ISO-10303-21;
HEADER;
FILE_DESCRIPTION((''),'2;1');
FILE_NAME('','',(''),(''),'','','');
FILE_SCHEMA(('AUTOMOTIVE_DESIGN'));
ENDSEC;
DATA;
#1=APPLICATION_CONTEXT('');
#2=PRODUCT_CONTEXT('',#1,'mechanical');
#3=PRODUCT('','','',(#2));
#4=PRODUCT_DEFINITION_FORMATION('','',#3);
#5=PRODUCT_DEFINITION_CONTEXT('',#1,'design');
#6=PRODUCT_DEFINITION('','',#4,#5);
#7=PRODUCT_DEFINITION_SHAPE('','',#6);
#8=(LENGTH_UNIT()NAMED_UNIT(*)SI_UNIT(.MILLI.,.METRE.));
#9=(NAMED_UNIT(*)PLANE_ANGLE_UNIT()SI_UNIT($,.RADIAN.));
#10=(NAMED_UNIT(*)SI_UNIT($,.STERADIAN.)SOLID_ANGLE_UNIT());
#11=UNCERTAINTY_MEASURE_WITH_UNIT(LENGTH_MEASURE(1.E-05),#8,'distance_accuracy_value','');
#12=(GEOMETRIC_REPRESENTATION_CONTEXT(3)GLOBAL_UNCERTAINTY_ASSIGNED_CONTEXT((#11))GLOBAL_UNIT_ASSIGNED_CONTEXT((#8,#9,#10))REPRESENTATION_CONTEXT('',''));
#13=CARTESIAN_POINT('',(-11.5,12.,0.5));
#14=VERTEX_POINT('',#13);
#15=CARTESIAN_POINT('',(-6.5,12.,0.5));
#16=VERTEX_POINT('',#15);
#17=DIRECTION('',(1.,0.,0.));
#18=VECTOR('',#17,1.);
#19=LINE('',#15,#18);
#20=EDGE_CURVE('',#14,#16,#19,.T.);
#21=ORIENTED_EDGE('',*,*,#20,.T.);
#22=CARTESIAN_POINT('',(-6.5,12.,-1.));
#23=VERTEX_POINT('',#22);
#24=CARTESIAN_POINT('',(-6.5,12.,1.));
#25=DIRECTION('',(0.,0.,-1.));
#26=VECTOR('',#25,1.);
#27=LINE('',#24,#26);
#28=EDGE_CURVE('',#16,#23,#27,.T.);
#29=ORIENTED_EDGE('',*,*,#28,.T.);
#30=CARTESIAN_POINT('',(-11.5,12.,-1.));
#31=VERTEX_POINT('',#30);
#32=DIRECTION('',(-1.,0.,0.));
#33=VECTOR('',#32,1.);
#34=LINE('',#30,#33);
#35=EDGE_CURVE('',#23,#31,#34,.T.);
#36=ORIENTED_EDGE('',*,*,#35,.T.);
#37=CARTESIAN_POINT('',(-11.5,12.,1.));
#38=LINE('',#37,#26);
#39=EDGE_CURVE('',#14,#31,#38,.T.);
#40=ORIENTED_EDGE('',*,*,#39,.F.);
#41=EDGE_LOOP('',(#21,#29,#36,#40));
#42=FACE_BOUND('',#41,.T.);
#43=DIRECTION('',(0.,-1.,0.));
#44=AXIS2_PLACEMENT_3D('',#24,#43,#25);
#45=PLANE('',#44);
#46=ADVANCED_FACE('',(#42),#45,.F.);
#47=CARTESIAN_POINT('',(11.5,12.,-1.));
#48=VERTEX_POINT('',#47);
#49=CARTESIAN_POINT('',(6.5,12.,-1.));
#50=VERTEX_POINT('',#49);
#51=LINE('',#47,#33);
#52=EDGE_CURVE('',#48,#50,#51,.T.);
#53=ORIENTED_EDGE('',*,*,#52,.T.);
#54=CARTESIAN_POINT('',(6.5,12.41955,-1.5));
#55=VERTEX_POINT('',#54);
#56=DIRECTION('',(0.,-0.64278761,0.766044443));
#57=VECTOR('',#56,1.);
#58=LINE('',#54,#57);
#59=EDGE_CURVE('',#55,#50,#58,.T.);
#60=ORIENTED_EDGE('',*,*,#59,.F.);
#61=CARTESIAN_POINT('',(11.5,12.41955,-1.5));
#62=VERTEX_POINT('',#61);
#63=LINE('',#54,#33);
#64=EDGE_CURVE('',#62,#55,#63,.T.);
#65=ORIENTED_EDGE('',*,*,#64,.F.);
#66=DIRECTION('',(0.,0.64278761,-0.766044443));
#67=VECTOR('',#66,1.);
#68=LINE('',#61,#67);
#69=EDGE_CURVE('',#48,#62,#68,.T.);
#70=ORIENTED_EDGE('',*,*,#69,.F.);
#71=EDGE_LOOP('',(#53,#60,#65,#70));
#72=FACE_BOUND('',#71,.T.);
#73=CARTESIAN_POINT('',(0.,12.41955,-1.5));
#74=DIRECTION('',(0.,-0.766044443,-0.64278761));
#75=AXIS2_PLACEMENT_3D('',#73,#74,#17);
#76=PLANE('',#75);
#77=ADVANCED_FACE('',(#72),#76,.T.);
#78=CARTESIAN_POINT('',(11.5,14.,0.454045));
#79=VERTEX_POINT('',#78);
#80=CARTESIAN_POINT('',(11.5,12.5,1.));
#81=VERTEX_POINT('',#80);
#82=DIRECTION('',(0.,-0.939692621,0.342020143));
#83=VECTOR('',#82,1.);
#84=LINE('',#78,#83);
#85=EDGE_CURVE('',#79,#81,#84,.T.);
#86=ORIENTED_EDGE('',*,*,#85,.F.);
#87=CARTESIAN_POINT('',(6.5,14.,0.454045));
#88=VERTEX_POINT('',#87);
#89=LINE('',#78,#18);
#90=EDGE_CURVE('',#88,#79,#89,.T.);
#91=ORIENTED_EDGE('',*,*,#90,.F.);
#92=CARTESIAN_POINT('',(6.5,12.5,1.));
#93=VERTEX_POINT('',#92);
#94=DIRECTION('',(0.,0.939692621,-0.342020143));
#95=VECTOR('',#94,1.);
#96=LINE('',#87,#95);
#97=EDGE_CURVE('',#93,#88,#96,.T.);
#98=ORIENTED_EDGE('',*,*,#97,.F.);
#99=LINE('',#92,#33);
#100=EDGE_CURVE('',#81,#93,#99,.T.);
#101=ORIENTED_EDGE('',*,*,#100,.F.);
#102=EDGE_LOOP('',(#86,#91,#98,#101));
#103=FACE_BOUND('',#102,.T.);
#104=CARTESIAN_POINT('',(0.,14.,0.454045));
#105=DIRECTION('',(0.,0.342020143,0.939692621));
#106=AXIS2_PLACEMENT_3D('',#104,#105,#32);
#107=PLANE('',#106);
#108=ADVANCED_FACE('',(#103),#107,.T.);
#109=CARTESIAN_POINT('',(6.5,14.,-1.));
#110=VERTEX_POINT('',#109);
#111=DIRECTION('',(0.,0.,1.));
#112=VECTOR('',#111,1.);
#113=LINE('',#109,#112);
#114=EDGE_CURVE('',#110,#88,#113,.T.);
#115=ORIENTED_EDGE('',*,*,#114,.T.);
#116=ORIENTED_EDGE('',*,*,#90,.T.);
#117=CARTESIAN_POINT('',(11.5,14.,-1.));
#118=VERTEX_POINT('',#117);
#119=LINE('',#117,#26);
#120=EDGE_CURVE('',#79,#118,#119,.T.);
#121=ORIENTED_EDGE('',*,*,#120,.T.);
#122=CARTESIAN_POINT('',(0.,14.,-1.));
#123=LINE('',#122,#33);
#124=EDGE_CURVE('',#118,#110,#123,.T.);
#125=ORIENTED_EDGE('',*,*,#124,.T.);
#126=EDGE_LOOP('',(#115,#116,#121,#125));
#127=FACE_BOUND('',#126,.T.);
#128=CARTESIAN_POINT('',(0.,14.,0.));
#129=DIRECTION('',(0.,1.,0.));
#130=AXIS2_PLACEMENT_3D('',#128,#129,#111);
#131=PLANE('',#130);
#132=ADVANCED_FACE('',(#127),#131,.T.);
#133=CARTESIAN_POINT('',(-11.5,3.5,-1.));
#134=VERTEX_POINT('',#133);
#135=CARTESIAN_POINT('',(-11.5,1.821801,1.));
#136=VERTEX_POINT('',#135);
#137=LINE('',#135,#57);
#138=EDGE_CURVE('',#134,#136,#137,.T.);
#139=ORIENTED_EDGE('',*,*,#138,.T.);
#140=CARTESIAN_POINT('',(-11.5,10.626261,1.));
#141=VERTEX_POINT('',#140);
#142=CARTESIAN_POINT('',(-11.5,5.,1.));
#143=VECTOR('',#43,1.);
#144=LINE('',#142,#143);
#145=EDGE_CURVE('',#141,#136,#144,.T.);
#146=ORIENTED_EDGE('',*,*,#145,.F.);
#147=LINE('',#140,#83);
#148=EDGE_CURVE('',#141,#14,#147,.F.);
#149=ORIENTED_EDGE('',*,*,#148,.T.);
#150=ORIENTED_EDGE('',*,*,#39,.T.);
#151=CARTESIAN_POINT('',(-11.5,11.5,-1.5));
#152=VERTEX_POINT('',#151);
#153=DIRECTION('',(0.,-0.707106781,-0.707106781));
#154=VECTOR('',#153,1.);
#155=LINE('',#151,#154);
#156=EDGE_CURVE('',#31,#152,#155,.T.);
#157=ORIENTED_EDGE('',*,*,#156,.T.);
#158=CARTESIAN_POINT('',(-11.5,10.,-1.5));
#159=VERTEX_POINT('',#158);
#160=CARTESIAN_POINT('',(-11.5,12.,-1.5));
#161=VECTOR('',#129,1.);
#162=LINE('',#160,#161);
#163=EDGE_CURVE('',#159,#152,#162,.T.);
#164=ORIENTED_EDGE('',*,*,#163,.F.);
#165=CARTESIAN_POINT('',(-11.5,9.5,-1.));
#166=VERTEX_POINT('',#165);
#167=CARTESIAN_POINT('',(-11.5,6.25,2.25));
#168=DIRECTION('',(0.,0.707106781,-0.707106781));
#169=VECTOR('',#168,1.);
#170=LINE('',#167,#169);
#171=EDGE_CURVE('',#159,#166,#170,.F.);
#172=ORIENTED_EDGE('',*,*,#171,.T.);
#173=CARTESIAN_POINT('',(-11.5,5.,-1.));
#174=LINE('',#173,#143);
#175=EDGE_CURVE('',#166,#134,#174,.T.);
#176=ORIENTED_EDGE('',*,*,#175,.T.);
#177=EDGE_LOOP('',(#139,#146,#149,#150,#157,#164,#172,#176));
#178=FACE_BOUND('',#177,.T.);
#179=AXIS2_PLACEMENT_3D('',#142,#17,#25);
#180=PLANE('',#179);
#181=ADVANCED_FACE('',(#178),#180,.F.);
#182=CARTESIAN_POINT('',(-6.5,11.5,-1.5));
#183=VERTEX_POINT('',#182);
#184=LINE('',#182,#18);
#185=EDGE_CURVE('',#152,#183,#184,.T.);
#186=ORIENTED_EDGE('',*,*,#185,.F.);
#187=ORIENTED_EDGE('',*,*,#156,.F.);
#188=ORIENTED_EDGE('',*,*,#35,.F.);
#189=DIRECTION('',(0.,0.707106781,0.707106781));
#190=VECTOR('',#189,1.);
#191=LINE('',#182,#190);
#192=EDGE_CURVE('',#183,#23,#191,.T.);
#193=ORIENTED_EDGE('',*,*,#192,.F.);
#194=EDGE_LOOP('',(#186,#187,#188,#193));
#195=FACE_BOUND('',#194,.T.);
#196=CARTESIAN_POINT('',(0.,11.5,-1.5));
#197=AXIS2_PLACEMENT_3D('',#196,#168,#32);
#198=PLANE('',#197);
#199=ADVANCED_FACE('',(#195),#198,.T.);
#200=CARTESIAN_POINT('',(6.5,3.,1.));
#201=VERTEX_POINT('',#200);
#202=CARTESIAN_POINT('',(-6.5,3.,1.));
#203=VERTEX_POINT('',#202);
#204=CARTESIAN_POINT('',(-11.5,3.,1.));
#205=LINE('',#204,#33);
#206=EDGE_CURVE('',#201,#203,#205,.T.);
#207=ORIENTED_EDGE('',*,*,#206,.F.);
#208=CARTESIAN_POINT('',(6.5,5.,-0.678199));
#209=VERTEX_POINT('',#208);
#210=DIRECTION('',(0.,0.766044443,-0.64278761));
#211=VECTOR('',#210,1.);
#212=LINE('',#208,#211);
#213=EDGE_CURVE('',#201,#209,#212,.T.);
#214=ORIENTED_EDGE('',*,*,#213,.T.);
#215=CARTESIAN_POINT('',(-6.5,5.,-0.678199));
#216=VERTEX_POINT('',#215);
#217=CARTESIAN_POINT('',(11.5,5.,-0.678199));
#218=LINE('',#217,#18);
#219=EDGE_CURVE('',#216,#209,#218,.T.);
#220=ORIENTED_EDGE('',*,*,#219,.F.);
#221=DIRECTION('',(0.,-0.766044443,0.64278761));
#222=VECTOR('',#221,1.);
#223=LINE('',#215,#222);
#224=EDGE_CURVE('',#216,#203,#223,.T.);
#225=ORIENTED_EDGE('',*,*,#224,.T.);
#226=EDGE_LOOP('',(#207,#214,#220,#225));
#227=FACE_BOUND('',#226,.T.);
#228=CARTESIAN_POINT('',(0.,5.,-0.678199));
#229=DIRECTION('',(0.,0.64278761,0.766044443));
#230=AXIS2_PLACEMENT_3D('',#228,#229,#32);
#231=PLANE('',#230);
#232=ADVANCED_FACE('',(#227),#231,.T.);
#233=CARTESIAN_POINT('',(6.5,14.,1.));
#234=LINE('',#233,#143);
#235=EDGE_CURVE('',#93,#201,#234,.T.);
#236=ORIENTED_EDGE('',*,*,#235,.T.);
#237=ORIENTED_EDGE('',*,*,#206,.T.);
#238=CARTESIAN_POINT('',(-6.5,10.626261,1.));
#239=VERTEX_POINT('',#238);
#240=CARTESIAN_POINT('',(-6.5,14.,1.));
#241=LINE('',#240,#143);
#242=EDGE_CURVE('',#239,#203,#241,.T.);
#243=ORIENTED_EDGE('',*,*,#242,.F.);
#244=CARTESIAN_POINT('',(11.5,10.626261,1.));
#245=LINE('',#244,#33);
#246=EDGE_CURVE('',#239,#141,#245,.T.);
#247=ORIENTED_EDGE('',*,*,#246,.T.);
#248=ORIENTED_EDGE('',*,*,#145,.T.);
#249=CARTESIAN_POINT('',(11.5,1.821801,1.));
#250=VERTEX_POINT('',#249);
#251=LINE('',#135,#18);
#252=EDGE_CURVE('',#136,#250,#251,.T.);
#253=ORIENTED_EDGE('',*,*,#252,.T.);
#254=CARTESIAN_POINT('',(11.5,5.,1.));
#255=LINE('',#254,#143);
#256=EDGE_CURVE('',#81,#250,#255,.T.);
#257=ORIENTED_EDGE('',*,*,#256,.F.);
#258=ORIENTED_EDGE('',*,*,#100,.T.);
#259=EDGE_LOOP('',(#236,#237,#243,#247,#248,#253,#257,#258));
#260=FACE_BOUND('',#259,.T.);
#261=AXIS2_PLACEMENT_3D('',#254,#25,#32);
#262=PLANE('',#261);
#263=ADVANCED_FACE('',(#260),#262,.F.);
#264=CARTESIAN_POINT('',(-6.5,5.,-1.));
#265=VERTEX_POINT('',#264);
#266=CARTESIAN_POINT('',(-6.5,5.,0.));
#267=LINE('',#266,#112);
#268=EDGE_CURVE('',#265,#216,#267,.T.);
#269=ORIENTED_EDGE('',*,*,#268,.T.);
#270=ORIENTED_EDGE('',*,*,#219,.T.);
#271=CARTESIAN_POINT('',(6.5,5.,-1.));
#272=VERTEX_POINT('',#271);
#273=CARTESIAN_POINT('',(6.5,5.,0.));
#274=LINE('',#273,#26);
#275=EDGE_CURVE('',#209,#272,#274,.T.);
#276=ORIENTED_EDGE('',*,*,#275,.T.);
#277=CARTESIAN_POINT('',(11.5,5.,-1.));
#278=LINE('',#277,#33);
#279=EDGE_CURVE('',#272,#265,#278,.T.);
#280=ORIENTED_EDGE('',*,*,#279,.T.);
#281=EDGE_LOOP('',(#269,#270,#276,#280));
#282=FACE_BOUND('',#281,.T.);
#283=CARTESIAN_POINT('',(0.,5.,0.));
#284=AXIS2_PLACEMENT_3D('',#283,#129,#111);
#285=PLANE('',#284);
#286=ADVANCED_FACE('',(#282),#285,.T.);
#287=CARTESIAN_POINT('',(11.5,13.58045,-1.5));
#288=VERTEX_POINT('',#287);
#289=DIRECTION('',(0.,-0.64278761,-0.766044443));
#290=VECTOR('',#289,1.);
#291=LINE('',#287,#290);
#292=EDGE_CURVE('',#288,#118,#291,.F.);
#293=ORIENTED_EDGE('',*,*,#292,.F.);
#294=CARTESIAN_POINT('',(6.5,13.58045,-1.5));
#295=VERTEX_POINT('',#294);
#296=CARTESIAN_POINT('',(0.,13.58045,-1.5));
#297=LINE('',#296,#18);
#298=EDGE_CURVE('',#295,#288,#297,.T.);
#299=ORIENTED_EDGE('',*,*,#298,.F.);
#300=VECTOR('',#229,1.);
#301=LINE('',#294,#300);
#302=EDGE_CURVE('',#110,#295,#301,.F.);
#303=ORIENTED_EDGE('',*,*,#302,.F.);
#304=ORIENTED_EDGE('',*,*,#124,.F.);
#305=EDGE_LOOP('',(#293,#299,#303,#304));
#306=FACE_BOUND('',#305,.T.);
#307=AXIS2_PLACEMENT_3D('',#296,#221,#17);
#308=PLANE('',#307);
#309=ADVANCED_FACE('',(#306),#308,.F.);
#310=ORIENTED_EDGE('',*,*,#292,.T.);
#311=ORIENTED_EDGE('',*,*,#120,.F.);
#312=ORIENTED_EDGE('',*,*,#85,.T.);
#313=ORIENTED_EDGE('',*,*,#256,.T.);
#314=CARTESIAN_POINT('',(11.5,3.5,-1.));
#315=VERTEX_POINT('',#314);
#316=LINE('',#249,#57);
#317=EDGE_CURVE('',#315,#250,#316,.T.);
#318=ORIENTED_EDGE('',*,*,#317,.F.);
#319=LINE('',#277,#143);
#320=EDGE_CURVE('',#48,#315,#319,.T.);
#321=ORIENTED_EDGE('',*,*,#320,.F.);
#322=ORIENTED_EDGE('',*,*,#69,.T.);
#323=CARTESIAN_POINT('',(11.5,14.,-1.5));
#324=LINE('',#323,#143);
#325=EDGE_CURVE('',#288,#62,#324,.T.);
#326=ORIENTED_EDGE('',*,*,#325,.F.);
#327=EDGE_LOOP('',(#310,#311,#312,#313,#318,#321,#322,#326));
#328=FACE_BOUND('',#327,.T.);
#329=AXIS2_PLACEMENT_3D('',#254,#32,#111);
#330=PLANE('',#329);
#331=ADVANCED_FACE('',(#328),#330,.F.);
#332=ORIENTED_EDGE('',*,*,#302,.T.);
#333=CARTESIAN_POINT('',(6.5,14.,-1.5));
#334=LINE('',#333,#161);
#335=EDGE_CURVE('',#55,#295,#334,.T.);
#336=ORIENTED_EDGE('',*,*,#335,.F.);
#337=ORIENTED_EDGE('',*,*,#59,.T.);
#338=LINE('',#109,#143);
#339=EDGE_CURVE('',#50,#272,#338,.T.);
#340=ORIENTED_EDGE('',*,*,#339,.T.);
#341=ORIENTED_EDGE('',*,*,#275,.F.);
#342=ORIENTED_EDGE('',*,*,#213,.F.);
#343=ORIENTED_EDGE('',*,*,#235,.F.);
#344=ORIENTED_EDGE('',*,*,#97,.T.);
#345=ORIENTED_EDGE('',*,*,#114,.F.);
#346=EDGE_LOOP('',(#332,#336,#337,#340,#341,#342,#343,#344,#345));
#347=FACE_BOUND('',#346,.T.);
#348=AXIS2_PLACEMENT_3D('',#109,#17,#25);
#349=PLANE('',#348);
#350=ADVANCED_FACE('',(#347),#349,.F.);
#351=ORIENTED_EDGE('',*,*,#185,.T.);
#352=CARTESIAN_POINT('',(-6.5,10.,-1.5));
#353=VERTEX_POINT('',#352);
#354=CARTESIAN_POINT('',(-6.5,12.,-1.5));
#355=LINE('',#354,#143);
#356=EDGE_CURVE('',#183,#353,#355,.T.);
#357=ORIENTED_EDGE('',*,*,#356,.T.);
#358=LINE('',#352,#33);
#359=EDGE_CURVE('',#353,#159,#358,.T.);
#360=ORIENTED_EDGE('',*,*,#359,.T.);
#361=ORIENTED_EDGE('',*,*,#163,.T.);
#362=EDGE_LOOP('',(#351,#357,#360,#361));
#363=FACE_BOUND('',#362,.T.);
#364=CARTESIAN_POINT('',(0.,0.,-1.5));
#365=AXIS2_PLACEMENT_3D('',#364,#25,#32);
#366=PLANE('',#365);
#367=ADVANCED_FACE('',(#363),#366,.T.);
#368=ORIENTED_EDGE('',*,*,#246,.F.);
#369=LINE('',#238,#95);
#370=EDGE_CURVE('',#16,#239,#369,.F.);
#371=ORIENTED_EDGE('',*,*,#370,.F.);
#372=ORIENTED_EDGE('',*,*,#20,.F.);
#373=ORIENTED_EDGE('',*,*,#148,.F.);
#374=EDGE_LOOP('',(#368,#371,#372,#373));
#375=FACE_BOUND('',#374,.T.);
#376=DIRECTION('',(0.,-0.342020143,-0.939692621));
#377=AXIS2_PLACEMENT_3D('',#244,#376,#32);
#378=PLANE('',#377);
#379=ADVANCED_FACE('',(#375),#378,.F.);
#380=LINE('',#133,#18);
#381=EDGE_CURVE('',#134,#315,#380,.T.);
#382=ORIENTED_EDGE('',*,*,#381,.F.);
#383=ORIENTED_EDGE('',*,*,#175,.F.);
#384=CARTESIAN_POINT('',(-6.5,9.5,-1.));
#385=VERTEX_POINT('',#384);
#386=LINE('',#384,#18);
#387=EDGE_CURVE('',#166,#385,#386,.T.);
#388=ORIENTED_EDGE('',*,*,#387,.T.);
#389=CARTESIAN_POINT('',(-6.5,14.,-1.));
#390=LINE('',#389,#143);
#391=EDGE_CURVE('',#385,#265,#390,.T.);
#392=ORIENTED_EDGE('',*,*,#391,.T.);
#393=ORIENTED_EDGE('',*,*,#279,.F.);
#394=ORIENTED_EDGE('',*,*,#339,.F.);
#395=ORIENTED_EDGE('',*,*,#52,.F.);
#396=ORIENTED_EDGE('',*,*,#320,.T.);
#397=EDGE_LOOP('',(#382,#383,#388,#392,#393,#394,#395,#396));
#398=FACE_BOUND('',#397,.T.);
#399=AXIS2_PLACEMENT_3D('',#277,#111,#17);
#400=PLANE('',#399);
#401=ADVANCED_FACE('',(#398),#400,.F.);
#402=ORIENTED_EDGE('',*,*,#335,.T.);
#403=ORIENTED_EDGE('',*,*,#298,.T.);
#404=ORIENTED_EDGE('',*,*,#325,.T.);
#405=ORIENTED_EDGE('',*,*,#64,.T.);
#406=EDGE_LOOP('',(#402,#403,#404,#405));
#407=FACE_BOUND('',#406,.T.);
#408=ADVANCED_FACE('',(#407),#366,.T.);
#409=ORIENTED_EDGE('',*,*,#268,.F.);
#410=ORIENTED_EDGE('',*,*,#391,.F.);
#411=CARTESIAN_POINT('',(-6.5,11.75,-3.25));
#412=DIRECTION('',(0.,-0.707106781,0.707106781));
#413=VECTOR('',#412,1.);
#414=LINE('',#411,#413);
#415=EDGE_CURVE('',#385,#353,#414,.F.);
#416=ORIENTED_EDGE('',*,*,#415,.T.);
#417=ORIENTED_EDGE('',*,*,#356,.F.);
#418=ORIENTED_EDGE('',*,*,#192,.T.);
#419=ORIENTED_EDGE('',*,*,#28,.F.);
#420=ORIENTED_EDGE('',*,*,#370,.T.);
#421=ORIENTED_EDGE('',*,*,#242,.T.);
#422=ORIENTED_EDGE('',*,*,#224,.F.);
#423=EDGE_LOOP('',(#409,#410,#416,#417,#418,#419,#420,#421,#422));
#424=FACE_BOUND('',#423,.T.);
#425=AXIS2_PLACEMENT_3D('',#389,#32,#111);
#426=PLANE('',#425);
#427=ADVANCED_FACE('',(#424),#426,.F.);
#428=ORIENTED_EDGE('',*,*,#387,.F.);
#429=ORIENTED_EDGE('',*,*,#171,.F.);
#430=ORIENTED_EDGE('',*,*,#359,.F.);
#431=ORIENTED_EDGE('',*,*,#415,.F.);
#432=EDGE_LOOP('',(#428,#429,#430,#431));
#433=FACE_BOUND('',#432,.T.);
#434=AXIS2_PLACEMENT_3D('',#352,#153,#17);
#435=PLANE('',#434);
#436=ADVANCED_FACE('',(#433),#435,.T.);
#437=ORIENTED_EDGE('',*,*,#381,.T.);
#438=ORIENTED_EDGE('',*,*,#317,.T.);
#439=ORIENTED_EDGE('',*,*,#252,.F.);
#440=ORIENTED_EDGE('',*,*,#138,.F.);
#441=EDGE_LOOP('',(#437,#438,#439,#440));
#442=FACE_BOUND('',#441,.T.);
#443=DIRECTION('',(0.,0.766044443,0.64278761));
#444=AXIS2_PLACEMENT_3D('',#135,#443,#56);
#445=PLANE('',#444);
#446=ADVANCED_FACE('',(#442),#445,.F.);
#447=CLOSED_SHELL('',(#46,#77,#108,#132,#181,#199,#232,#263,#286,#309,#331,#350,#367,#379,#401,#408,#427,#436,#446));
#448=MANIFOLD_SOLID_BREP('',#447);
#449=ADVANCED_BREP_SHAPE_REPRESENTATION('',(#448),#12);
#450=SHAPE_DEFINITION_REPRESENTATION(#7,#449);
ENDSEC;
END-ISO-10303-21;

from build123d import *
from OCP.BRepFilletAPI import BRepFilletAPI_MakeChamfer

# Parameters (mm, degrees)
SKETCH_1_W          = 23
SKETCH_1_H          = 2
EXTRUDE_1_DEPTH     = 5
CHAMFER_1_SIZE      = 2
CHAMFER_1_SIZE2     = 1.678199262
SKETCH_2_W          = 5
SKETCH_2_H          = 2
EXTRUDE_2_DEPTH     = 14
CUT_EXTRUDE_1_DEPTH = 27.944387171
SKETCH_4_W          = 5
SKETCH_4_H          = 2
EXTRUDE_3_DEPTH     = 0.5
CHAMFER_3_SIZE      = 0.419549816
CHAMFER_3_SIZE_2    = 0.5
SKETCH_5_W          = 5
SKETCH_5_H          = 2
CUT_EXTRUDE_2_DEPTH = 19.227726134
CHAMFER_4_SIZE      = 1.5
CHAMFER_4_SIZE2     = 0.545955351
SKETCH_6_W          = 5
SKETCH_6_H          = 2
EXTRUDE_4_DEPTH     = 0.5
CHAMFER_5_SIZE      = 0.5
CHAMFER_6_SIZE      = 0.5
CHAMFER_6_SIZE2     = 1.37373871


with BuildPart() as part:
    # 草图1 → 凸台-拉伸1 (new body)
    with BuildSketch(Plane(origin=(0, 0, 0), x_dir=(1, 0, 0), z_dir=(0, 1, 0))):
        Rectangle(SKETCH_1_W, SKETCH_1_H)
    extrude(amount=EXTRUDE_1_DEPTH)

    # 倒角1
    chamfer_1_edges = [part.edges().sort_by_distance(p)[0] for p in [
        (0, 5, 1),
    ]]
    chamfer_1_side = [part.faces().sort_by_distance(p)[0] for p in [
        (0, 2.5, 1),
    ]]
    chamfer(chamfer_1_edges, length=CHAMFER_1_SIZE, length2=CHAMFER_1_SIZE2, reference=chamfer_1_side[0])

    # 草图2 → 凸台-拉伸2 (add)
    with BuildSketch(Plane(origin=(0, 0, 0), x_dir=(1, 0, 0), z_dir=(0, 1, 0))):
        with Locations((-9, 0)):
            Rectangle(SKETCH_2_W, SKETCH_2_H)
        with Locations((9, 0)):
            Rectangle(SKETCH_2_W, SKETCH_2_H)
    extrude(amount=EXTRUDE_2_DEPTH)

    # 草图3 → 切除-拉伸1 (cut, through all)
    with BuildSketch(Plane(origin=(11.5, 0, 0), x_dir=(0, 0, -1), z_dir=(1, 0, 0))):
        Polygon((-1, 1.821800738), (1, 3.5), (1, 0), (-1, 0), align=None)
    extrude(amount=-CUT_EXTRUDE_1_DEPTH, mode=Mode.SUBTRACT)

    # 草图4 → 凸台-拉伸3 (add)
    with BuildSketch(Plane(origin=(0, 0, -1), x_dir=(-1, 0, 0), z_dir=(0, 0, -1))):
        with Locations((-9, 13)):
            Rectangle(SKETCH_4_W, SKETCH_4_H)
    extrude(amount=EXTRUDE_3_DEPTH)

    # 倒角3
    chamfer_3_edges_1 = [part.edges().sort_by_distance(p)[0] for p in [
        (9, 12, -1.5),
    ]]
    chamfer_3_side_1 = [part.faces().sort_by_distance(p)[0] for p in [
        (9, 12.008390996, -1.5),
    ]]
    chamfer_3_edges_2 = [part.edges().sort_by_distance(p)[0] for p in [
        (9, 14, -1.5),
    ]]
    chamfer_3_side_2 = [part.faces().sort_by_distance(p)[0] for p in [
        (9, 13.991609004, -1.5),
    ]]
    chamfer_3 = BRepFilletAPI_MakeChamfer(part.part.solid().wrapped)
    for e in chamfer_3_edges_1:
        chamfer_3.Add(CHAMFER_3_SIZE - 0.0001, CHAMFER_3_SIZE_2 - 0.0001, e.wrapped, chamfer_3_side_1[0].wrapped)
    for e in chamfer_3_edges_2:
        chamfer_3.Add(CHAMFER_3_SIZE - 0.0001, CHAMFER_3_SIZE_2 - 0.0001, e.wrapped, chamfer_3_side_2[0].wrapped)
    add(Compound.cast(chamfer_3.Shape()), mode=Mode.REPLACE)  # a hair under: the kernel refuses the full size

    # 草图5 → 切除-拉伸2 (cut, through all)
    with BuildSketch(Plane(origin=(0, 0, -1), x_dir=(-1, 0, 0), z_dir=(0, 0, -1))):
        with Locations((9, 13)):
            Rectangle(SKETCH_5_W, SKETCH_5_H)
    extrude(amount=-CUT_EXTRUDE_2_DEPTH, mode=Mode.SUBTRACT)

    # 倒角4
    chamfer_4_edges = [part.edges().sort_by_distance(p)[0] for p in [
        (9, 14, 1),
    ]]
    chamfer_4_side = [part.faces().sort_by_distance(p)[0] for p in [
        (0, 2.082052258, 1),
    ]]
    chamfer(chamfer_4_edges, length=CHAMFER_4_SIZE, length2=CHAMFER_4_SIZE2, reference=chamfer_4_side[0])

    # 草图6 → 凸台-拉伸4 (add)
    with BuildSketch(Plane(origin=(0, 0, -1), x_dir=(-1, 0, 0), z_dir=(0, 0, -1))):
        with Locations((9, 11)):
            Rectangle(SKETCH_6_W, SKETCH_6_H)
    extrude(amount=EXTRUDE_4_DEPTH)

    # 倒角5
    chamfer_5_edges = [part.edges().sort_by_distance(p)[0] for p in [
        (-9, 10, -1),
    ]]
    chamfer(chamfer_5_edges, length=CHAMFER_5_SIZE - 0.0001)  # a hair under: the kernel refuses the full size
    chamfer_5_2_edges = [part.edges().sort_by_distance(p)[0] for p in [
        (-9, 12, -1.5),
    ]]
    chamfer(chamfer_5_2_edges, length=CHAMFER_5_SIZE)

    # 倒角6
    chamfer_6_edges = [part.edges().sort_by_distance(p)[0] for p in [
        (-9, 12, 1),
    ]]
    chamfer_6_side = [part.faces().sort_by_distance(p)[0] for p in [
        (-9, 12, 0),
    ]]
    chamfer(chamfer_6_edges, length=CHAMFER_6_SIZE, length2=CHAMFER_6_SIZE2, reference=chamfer_6_side[0])


solid = part.part
